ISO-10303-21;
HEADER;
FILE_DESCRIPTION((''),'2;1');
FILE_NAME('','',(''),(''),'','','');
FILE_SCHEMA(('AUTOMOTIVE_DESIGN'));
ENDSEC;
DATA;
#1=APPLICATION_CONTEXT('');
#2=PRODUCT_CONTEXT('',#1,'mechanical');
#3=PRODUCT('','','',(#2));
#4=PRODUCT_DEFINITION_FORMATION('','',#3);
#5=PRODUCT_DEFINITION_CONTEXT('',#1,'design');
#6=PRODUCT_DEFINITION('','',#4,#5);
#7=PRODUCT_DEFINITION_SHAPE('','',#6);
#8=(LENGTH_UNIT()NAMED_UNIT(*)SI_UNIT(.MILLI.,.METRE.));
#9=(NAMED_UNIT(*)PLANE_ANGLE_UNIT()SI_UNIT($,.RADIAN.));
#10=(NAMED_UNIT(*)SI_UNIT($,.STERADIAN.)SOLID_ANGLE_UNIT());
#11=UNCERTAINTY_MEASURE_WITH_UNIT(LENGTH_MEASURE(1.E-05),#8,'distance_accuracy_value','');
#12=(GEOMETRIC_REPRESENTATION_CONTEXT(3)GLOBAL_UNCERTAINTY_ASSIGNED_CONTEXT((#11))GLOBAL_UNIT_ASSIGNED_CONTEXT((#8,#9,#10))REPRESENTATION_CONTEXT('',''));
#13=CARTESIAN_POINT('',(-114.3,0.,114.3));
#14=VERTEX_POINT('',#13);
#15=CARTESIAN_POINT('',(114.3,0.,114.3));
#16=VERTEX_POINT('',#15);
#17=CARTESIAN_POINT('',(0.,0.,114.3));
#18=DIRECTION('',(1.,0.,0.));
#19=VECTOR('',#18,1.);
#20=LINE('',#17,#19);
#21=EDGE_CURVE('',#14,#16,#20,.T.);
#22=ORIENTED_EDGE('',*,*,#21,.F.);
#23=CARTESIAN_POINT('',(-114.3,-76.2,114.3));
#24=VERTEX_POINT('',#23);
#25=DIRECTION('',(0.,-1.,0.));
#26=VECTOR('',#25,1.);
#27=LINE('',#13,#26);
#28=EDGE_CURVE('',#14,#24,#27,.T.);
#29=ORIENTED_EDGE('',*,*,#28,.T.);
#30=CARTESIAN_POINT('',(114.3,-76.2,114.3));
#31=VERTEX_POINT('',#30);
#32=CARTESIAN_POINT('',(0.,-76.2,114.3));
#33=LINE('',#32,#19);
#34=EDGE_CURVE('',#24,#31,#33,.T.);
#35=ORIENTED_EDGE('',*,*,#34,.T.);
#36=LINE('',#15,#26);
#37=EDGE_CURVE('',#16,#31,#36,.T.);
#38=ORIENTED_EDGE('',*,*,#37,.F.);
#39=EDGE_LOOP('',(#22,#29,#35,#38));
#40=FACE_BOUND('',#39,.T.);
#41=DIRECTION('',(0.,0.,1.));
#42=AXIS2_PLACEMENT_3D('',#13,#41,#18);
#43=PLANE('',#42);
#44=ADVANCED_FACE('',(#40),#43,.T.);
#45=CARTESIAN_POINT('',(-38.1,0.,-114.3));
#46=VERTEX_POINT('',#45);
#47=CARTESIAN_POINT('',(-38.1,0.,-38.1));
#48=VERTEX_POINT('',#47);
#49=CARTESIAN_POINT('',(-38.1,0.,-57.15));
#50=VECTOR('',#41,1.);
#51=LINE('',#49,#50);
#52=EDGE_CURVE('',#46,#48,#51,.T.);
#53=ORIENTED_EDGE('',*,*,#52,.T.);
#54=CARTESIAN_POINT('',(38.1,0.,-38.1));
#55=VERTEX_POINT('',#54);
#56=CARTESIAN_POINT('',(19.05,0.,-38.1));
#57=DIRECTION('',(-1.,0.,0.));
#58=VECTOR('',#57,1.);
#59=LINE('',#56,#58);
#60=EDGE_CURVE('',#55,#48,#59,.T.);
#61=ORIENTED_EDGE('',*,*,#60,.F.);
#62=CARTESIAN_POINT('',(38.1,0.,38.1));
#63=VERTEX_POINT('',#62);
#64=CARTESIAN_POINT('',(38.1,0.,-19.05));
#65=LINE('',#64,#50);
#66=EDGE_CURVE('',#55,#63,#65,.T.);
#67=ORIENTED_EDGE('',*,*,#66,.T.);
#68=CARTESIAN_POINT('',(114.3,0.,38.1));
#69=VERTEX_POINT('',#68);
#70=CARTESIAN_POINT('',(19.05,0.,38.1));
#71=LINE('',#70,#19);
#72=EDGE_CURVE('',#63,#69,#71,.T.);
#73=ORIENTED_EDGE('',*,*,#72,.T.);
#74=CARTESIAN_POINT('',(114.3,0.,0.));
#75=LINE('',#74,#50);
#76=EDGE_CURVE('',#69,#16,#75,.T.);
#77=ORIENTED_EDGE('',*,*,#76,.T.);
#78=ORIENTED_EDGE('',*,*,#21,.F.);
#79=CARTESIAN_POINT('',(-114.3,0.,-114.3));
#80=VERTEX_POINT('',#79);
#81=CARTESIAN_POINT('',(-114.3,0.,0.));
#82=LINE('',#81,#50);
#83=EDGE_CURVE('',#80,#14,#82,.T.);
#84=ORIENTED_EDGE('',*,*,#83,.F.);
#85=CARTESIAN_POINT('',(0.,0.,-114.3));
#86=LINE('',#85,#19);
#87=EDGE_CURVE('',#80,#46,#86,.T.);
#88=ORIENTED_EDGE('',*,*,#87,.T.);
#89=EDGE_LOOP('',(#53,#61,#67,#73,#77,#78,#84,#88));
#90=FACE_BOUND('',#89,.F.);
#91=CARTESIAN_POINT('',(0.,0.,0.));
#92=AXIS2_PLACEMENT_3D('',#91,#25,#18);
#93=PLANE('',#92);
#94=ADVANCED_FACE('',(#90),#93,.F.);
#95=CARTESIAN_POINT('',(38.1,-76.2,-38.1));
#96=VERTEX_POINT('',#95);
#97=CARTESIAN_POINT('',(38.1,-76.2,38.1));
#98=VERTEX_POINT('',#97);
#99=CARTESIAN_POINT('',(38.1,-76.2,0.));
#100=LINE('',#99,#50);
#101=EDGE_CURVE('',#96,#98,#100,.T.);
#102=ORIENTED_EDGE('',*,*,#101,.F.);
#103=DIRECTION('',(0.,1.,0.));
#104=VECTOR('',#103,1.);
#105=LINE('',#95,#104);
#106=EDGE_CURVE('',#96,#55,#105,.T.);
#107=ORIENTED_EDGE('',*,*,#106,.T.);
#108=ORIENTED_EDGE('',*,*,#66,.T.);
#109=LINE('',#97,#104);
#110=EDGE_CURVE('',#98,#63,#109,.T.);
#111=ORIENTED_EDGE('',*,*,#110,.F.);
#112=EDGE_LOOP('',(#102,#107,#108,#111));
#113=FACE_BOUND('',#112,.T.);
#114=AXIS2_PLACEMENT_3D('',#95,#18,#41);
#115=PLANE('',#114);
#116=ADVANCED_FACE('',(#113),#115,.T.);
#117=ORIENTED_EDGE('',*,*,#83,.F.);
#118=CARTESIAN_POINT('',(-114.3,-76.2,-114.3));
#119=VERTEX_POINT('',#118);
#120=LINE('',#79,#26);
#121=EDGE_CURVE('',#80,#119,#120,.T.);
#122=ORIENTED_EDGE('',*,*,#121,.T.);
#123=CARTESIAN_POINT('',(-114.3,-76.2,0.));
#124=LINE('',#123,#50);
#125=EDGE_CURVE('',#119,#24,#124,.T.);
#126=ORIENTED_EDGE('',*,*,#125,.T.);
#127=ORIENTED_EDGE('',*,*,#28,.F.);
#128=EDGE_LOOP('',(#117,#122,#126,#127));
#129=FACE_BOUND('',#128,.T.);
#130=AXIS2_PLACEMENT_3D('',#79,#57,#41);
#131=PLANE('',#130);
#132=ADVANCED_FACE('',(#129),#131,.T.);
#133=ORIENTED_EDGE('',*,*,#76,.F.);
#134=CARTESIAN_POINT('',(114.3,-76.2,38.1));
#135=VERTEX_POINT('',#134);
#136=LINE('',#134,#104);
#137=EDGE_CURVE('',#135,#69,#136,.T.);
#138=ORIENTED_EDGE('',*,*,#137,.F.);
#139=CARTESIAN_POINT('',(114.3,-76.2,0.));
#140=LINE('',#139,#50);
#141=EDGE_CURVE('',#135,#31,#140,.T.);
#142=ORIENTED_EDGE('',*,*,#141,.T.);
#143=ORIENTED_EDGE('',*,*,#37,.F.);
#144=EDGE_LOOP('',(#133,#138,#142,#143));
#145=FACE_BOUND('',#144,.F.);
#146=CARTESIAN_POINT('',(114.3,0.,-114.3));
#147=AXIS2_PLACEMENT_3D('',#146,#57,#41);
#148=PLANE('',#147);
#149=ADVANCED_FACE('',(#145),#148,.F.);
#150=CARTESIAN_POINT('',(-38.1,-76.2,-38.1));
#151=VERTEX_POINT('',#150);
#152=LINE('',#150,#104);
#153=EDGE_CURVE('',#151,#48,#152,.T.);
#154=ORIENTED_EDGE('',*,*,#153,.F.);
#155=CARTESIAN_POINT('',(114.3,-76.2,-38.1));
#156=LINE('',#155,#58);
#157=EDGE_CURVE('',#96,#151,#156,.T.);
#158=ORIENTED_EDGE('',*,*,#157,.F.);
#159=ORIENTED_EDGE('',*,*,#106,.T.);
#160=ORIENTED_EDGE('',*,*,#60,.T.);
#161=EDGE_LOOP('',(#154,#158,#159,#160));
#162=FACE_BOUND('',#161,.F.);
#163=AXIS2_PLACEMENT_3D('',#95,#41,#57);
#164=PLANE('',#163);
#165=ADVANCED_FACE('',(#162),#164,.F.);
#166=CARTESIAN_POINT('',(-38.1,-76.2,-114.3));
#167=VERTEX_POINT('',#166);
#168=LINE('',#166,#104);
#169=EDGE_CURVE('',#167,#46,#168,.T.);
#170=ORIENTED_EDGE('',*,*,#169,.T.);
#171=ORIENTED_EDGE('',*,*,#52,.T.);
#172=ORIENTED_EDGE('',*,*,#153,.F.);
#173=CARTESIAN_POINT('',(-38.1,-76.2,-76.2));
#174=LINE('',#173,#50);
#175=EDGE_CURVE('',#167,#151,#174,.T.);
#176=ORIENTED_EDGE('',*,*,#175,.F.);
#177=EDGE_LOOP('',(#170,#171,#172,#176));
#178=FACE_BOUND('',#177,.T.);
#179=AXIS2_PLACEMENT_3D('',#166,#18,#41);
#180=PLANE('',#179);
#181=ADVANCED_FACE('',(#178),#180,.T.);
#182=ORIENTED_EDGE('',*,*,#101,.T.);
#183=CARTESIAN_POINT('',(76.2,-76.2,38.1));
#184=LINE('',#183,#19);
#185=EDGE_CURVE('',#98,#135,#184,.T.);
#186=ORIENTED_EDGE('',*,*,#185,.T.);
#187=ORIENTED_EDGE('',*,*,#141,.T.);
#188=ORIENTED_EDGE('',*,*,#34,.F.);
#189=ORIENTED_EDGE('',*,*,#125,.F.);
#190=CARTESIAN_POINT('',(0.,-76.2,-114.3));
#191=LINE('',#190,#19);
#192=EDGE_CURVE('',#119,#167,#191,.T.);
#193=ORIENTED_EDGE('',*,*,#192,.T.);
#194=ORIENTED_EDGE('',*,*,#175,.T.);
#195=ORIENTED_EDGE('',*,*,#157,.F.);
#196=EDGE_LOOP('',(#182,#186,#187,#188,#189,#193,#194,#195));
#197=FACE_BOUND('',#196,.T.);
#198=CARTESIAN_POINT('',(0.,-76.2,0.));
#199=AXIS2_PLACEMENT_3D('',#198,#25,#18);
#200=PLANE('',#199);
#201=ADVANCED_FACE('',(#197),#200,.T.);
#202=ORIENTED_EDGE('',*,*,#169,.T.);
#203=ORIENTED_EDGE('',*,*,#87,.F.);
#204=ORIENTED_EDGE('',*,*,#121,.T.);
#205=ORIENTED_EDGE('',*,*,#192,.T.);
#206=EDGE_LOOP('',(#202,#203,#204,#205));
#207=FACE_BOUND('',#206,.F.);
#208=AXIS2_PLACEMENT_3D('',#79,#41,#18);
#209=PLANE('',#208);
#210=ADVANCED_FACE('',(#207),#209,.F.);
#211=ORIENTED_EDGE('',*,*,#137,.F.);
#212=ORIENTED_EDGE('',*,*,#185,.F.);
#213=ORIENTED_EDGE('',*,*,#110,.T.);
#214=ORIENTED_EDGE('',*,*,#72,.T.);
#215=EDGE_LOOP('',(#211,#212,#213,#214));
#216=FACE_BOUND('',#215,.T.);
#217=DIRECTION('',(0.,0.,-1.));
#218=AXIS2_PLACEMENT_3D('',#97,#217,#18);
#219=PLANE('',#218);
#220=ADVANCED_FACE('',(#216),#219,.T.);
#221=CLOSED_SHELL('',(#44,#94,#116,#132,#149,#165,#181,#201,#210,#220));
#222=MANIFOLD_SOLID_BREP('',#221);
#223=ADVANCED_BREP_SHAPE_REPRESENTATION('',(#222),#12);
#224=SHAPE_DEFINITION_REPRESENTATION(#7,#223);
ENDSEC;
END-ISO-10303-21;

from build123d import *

# Parameters (mm, degrees)
F1_W     = 228.6
F1_H     = 228.6
F2_DEPTH = 76.2
F3_W     = 76.2
F3_H     = 76.2
F4_DEPTH = 76.201


# Not quite as in the source:
# - a variable given as a bare number and used for a length is read in inches; the dataset says mm whatever the document's units were


with BuildPart() as f2:
    # F1 (on Front) → F2 (new body)
    with BuildSketch(Plane.XZ):
        Rectangle(F1_W, F1_H)
    extrude(amount=F2_DEPTH)

    # F3 (on face) → F4 (cut, through all)
    with BuildSketch(Plane.XZ.offset(76.2)):
        with Locations((76.2, -76.2)):
            Rectangle(F3_W, F3_H)
        with Locations((0, -76.2)):
            Rectangle(F3_W, F3_H)
        with Locations((76.2, 0)):
            Rectangle(F3_W, F3_H)
    extrude(amount=-F4_DEPTH, mode=Mode.SUBTRACT)


solid = f2.part
